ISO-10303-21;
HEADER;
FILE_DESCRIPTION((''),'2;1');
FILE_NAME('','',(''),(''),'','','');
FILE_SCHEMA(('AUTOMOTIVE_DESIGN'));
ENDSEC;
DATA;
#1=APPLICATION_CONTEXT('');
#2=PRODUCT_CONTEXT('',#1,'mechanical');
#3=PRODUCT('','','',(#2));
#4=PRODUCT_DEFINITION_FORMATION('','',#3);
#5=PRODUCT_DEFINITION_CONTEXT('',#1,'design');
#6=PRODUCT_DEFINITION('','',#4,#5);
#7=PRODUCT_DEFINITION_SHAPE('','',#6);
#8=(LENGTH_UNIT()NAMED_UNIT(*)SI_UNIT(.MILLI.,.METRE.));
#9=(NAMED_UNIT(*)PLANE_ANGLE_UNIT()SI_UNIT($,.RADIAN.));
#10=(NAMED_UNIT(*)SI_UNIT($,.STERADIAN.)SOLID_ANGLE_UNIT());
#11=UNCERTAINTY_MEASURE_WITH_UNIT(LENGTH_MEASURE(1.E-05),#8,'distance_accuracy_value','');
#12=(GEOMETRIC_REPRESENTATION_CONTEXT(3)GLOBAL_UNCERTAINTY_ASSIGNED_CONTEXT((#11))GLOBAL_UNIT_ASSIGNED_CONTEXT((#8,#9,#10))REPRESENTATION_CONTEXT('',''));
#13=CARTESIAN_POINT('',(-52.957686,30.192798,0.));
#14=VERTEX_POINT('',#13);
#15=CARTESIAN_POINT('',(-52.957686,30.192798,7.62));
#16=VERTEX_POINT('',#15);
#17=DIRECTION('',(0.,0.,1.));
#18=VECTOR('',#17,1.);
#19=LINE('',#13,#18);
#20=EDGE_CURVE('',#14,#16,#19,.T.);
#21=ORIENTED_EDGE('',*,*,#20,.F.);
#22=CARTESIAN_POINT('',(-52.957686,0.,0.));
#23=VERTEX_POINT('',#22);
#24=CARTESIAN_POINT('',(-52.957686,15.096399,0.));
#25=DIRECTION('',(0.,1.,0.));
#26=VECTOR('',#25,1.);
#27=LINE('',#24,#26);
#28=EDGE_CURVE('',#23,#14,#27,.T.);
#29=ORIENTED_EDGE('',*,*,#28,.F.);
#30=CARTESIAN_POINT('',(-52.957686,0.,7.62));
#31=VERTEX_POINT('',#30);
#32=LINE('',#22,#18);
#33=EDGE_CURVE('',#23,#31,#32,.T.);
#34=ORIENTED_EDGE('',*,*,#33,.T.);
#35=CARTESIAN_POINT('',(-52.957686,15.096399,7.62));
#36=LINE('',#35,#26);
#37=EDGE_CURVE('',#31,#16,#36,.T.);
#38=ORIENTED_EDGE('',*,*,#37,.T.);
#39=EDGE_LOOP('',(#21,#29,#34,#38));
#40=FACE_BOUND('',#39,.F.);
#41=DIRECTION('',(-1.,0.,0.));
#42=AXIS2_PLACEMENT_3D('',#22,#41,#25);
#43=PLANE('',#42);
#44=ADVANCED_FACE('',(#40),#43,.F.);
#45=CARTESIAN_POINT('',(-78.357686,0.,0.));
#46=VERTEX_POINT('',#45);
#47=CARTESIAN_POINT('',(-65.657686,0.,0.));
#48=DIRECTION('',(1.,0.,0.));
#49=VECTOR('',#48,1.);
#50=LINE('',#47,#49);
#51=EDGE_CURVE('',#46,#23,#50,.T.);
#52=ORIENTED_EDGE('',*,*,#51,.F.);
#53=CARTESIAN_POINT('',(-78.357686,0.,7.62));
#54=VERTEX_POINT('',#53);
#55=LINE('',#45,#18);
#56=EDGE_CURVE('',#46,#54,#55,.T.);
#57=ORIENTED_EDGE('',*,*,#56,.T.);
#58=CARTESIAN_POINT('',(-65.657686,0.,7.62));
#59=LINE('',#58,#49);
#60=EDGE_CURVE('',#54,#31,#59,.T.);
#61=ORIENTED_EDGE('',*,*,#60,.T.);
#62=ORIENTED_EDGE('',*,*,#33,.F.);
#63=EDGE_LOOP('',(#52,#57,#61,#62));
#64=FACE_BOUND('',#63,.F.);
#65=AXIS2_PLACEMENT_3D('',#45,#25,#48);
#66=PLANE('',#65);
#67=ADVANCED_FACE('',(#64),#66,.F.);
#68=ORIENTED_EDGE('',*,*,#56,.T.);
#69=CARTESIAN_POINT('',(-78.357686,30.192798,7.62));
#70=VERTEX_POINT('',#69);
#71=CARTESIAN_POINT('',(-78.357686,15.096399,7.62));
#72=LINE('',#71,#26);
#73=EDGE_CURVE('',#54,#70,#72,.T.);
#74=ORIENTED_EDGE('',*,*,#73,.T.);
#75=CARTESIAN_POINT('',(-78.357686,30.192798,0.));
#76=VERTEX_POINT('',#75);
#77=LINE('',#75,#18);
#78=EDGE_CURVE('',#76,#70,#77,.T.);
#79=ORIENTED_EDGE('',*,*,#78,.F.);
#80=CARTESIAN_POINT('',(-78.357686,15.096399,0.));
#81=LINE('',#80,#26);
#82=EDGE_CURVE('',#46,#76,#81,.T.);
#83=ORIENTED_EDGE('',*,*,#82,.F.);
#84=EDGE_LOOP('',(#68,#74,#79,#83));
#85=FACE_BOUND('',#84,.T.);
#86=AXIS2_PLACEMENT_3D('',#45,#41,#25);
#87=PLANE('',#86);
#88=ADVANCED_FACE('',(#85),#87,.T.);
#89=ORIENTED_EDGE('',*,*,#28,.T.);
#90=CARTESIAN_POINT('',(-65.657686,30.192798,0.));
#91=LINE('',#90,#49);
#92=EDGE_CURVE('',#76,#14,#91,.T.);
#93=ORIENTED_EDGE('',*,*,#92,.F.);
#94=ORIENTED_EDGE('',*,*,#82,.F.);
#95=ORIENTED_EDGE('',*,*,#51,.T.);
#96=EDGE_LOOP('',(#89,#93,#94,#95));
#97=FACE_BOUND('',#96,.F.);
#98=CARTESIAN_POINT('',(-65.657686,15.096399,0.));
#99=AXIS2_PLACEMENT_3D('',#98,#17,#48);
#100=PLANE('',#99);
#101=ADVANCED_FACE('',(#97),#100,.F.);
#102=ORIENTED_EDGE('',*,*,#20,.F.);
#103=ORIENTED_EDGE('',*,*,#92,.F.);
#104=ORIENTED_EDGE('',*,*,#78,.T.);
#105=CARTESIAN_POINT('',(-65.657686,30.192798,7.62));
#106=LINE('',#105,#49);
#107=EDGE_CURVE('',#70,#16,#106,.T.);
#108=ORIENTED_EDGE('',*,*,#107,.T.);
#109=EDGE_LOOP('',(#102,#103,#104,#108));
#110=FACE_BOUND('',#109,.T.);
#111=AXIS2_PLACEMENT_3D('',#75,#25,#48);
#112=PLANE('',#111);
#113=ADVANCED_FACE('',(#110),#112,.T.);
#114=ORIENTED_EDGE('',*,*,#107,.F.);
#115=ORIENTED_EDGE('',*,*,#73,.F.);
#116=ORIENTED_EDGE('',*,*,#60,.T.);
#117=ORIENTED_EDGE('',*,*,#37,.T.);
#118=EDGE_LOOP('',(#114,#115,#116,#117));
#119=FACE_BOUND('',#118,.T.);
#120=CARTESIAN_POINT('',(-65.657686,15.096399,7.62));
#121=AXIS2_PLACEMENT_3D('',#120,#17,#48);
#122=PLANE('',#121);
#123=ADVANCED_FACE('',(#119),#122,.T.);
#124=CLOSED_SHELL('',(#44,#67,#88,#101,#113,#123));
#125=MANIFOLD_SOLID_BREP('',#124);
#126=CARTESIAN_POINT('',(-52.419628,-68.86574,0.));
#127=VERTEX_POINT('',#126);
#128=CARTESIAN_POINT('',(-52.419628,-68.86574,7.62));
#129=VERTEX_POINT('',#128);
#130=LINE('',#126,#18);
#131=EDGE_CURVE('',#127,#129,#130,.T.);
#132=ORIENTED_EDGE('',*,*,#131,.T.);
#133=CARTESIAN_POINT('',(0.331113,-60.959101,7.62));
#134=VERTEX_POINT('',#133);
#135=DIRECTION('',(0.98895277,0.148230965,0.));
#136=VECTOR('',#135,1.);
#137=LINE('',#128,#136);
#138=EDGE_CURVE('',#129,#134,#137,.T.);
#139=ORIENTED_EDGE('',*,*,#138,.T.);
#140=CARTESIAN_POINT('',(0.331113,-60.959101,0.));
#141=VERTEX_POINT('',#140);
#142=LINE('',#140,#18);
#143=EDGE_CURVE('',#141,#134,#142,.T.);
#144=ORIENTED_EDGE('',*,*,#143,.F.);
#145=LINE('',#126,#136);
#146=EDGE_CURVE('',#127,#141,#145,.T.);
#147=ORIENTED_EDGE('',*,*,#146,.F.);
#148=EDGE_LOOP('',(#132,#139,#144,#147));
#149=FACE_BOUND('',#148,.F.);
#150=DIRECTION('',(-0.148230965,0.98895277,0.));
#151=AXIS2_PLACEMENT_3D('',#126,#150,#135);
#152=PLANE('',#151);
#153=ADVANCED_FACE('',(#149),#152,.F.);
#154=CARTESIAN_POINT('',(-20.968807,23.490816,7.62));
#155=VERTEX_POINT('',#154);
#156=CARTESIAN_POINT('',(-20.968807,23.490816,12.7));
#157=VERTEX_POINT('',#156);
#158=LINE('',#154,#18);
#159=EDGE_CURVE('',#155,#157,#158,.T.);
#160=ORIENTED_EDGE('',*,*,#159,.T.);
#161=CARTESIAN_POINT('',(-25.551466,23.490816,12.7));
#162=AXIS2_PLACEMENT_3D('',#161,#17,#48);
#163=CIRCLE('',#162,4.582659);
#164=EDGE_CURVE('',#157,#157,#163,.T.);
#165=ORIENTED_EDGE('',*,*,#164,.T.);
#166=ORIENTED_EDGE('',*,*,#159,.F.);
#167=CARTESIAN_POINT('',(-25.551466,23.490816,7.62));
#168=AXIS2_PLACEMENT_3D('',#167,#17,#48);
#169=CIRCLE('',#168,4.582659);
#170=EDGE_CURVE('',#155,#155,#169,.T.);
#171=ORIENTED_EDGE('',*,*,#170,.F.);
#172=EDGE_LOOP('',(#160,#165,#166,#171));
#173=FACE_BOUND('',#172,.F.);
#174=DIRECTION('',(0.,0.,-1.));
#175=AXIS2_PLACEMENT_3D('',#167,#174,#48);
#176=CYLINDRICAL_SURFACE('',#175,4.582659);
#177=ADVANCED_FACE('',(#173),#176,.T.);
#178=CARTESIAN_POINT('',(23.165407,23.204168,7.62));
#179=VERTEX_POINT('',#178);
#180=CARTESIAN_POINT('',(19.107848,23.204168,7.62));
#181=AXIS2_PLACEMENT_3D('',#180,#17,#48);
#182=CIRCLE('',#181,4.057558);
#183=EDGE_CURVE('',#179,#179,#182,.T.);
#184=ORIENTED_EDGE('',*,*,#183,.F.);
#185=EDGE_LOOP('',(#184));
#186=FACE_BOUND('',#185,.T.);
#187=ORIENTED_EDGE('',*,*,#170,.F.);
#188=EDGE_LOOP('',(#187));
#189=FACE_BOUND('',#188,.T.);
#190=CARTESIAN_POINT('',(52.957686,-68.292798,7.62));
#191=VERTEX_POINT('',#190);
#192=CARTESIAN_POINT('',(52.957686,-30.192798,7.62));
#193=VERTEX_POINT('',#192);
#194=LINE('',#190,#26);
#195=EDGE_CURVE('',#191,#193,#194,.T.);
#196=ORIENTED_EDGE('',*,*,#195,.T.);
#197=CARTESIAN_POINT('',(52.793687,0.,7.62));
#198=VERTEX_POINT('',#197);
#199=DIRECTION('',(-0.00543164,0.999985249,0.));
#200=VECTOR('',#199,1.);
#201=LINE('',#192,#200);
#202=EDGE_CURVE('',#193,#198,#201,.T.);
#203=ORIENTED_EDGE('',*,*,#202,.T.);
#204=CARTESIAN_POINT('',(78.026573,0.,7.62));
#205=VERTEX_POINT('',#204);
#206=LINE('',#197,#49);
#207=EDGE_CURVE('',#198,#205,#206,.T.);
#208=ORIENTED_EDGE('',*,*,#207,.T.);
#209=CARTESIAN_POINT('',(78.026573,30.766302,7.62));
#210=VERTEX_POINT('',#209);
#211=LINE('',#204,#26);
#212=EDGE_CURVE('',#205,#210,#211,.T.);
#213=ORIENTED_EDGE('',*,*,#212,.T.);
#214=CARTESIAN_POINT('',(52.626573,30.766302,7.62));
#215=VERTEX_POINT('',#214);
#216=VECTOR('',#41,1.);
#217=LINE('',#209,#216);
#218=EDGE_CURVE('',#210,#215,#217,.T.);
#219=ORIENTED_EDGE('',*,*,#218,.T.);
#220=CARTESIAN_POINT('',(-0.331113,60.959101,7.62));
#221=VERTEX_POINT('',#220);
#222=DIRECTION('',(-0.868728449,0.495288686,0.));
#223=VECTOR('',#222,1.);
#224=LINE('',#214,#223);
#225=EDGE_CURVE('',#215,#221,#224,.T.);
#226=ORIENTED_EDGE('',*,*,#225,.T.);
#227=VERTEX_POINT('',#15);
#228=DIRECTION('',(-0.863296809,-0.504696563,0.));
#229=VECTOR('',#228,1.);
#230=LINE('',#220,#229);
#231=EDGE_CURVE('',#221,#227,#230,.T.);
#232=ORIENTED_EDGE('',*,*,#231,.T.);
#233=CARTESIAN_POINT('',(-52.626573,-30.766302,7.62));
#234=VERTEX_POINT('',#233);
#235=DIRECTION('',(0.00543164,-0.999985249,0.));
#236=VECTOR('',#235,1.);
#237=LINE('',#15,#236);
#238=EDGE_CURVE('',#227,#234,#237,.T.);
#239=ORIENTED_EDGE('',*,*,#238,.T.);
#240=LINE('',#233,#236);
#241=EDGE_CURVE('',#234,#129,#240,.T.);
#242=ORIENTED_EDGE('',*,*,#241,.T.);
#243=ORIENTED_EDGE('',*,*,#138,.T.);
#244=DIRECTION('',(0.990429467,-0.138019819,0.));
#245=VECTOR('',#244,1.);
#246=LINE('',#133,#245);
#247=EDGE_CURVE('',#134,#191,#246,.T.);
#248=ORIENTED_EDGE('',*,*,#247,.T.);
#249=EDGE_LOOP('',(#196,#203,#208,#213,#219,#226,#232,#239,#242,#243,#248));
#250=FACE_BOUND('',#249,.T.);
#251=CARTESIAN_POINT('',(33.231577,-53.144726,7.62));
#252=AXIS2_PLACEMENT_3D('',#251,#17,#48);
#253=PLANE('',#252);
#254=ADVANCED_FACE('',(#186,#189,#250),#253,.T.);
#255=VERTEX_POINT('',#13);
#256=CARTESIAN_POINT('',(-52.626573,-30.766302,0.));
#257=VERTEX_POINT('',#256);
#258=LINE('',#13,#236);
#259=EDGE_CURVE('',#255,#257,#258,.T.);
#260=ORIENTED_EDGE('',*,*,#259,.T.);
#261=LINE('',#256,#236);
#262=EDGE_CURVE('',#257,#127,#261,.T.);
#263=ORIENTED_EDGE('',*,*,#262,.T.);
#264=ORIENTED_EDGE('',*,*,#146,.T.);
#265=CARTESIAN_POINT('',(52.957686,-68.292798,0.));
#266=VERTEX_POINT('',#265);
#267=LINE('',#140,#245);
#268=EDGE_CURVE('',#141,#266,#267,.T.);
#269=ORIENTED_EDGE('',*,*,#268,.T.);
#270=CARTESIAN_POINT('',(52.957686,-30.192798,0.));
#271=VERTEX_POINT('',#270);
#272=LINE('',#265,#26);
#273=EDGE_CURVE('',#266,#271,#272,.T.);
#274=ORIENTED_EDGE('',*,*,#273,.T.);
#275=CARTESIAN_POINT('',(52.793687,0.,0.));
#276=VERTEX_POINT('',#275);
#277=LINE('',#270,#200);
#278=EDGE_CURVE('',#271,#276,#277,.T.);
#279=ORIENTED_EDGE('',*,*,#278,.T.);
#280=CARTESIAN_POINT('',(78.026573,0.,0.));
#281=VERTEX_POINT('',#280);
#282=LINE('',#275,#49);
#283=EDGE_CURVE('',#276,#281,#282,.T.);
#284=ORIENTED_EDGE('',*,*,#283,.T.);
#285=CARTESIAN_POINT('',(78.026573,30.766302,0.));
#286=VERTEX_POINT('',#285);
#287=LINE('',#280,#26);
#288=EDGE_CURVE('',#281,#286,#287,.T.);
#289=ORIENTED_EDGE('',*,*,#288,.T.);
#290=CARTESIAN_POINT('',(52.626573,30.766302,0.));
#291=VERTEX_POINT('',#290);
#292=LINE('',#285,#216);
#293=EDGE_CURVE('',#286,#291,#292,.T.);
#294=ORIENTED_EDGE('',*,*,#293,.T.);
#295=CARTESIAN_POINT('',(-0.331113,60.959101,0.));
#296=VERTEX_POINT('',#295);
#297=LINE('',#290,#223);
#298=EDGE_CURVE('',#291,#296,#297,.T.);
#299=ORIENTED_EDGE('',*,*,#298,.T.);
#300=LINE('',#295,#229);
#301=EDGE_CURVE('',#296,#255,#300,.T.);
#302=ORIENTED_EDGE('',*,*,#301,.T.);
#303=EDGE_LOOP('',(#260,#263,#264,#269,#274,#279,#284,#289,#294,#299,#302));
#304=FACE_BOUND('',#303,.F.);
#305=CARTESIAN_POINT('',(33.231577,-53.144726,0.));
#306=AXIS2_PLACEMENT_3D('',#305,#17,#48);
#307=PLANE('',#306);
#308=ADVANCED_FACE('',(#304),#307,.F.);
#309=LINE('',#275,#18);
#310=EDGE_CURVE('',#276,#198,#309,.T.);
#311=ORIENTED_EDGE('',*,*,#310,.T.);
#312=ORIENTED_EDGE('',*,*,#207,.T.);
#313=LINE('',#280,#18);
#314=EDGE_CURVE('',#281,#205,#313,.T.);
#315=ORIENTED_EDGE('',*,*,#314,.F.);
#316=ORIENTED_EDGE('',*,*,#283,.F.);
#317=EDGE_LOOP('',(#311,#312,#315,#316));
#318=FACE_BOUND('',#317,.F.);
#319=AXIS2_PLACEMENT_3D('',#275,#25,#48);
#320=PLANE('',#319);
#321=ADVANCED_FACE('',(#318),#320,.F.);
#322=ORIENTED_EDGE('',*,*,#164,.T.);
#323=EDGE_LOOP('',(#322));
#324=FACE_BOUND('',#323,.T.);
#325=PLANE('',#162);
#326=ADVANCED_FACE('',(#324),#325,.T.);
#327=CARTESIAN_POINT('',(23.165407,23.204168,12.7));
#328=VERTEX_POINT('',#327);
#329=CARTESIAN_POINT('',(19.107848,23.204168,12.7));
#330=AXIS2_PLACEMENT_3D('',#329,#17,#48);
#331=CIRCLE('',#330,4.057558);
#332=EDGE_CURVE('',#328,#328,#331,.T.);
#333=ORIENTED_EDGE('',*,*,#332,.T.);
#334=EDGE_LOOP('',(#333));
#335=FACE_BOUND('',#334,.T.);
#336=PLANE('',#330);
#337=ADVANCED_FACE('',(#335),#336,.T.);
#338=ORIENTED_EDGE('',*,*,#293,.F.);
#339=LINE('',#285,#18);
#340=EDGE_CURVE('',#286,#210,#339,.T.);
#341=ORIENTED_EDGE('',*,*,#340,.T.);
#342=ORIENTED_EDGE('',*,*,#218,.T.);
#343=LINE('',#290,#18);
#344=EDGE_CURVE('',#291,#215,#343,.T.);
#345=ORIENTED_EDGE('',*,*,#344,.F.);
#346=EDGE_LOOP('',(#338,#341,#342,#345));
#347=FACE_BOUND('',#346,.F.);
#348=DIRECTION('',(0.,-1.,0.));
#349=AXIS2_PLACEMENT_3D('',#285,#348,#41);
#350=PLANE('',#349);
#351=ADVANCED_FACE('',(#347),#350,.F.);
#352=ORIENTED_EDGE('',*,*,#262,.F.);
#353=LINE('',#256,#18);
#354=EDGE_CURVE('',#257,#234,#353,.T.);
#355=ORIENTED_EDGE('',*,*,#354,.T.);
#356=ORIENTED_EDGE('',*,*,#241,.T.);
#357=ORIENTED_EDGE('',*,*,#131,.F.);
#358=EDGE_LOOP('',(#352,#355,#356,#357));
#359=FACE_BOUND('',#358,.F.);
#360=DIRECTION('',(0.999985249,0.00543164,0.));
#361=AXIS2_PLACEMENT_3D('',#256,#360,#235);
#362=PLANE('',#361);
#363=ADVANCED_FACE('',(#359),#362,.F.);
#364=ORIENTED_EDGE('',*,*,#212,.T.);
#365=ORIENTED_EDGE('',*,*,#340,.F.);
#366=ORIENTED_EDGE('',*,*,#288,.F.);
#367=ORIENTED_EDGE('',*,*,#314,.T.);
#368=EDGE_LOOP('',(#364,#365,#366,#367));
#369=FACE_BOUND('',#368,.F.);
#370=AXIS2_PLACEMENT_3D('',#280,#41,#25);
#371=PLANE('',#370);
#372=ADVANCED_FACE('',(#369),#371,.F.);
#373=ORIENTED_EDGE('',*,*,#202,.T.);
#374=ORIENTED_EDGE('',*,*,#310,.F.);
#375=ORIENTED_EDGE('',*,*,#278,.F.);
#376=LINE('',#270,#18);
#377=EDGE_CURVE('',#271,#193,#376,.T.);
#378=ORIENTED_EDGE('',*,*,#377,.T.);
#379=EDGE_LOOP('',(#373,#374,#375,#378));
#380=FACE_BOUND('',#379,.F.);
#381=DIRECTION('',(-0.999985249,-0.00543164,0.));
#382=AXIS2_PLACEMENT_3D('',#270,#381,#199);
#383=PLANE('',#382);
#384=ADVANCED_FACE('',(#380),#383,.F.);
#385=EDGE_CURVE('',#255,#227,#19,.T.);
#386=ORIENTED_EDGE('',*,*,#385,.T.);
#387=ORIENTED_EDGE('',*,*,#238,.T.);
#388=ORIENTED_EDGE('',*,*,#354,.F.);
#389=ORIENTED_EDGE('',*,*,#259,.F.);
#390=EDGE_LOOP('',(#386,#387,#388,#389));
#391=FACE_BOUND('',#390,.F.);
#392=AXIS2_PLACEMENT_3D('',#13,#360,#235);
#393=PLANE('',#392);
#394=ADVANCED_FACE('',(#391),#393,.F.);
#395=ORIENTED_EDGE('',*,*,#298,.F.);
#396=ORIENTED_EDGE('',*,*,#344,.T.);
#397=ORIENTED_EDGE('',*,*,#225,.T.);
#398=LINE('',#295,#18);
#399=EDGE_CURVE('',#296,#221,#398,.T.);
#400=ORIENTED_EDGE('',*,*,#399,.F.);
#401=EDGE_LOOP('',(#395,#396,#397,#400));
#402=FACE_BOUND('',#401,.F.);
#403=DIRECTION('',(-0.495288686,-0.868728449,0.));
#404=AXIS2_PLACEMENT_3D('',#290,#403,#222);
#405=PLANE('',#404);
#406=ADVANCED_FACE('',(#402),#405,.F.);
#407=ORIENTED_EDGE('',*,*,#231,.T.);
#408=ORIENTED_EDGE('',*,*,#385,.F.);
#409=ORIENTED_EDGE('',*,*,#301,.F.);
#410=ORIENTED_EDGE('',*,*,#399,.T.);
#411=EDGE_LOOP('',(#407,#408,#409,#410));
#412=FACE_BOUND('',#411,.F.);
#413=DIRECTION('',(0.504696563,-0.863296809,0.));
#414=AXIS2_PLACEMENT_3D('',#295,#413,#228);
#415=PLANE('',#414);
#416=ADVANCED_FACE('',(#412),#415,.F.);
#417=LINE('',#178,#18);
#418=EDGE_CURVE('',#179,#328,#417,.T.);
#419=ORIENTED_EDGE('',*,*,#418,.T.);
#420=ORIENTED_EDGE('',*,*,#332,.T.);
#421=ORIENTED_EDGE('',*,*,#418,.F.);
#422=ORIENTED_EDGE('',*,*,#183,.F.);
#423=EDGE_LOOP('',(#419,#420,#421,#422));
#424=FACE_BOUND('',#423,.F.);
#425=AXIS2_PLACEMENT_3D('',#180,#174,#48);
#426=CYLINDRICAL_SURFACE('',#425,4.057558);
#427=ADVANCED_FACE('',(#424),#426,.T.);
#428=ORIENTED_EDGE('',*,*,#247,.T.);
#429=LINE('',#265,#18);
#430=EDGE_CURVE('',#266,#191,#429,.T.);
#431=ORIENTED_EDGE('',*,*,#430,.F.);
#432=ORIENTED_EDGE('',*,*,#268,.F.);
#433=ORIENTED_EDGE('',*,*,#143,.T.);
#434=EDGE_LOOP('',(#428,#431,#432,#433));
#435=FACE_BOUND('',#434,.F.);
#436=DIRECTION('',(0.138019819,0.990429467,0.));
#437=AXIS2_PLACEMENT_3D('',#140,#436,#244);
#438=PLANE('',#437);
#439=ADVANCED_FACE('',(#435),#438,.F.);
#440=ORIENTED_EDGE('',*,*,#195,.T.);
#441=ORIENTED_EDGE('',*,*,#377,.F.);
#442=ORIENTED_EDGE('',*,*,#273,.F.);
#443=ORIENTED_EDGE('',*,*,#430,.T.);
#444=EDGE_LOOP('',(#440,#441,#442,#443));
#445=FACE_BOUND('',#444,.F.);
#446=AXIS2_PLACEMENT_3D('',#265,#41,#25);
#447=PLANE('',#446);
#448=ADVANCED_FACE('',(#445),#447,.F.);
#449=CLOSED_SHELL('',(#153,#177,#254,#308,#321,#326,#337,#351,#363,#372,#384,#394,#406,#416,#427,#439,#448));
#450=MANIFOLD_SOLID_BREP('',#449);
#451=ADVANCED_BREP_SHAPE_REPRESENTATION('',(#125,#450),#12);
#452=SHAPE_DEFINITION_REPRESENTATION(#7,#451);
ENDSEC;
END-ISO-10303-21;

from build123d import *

# Parameters (mm, degrees)
F1_DEPTH = 7.62
F0_W     = 25.4
F0_H     = 30.1927982898
F4_R     = 4.0575582534
F5_DEPTH = 5.08
F6_R     = 4.5826589952
F7_DEPTH = 5.08


# Not quite as in the source:
# - the program builds the solid bodies; features that only make, move or delete a surface that nothing else refers to are left out


with BuildPart() as f1:
    # F0 (on Top) → F1 (new body)
    with BuildSketch(Plane.XY):
        Polygon((52.9576862357, -30.1927982898), (0.3311127876, -60.9591007506), (52.9576862357, -68.2927982898), align=None)
        Polygon((78.0265734481, 30.7663024608), (52.6265734481, 30.7663024608), (52.793687399, 0), (78.0265734481, 0), align=None)
        Polygon((0.3311127876, -60.9591007506), (-52.6265734481, -30.7663024608), (-52.4196279559, -68.86574043), align=None)
        Polygon((-0.3311127876, 60.9591007506), (-52.9576862357, 30.1927982898), (-52.6265734481, -30.7663024608), (0.3311127876, -60.9591007506), (52.9576862357, -30.1927982898), (52.793687399, 0), (52.6265734481, 0), (52.6265734481, 30.7663024608), align=None)
        Polygon((52.793687399, 0), (52.6265734481, 30.7663024608), (52.6265734481, 0), align=None)
    extrude(amount=F1_DEPTH)

    # F4 (on face) → F5 (join)
    with BuildSketch(Plane.XY.offset(7.62)):
        with Locations((19.1078484058, 23.2041683048)):
            Circle(F4_R)
    extrude(amount=F5_DEPTH)

    # F6 (on face) → F7 (join)
    with BuildSketch(Plane.XY.offset(7.62)):
        with Locations((-25.5514662713, 23.4908163548)):
            Circle(F6_R)
    extrude(amount=F7_DEPTH)


with BuildPart() as f1b:
    # F0 (on Top) → F1, piece 2 (new body)
    with BuildSketch(Plane.XY):
        with Locations((-65.6576862357, 15.0963991449)):
            Rectangle(F0_W, F0_H)
    extrude(amount=F1_DEPTH)


solid = Compound([f1.part, f1b.part])
